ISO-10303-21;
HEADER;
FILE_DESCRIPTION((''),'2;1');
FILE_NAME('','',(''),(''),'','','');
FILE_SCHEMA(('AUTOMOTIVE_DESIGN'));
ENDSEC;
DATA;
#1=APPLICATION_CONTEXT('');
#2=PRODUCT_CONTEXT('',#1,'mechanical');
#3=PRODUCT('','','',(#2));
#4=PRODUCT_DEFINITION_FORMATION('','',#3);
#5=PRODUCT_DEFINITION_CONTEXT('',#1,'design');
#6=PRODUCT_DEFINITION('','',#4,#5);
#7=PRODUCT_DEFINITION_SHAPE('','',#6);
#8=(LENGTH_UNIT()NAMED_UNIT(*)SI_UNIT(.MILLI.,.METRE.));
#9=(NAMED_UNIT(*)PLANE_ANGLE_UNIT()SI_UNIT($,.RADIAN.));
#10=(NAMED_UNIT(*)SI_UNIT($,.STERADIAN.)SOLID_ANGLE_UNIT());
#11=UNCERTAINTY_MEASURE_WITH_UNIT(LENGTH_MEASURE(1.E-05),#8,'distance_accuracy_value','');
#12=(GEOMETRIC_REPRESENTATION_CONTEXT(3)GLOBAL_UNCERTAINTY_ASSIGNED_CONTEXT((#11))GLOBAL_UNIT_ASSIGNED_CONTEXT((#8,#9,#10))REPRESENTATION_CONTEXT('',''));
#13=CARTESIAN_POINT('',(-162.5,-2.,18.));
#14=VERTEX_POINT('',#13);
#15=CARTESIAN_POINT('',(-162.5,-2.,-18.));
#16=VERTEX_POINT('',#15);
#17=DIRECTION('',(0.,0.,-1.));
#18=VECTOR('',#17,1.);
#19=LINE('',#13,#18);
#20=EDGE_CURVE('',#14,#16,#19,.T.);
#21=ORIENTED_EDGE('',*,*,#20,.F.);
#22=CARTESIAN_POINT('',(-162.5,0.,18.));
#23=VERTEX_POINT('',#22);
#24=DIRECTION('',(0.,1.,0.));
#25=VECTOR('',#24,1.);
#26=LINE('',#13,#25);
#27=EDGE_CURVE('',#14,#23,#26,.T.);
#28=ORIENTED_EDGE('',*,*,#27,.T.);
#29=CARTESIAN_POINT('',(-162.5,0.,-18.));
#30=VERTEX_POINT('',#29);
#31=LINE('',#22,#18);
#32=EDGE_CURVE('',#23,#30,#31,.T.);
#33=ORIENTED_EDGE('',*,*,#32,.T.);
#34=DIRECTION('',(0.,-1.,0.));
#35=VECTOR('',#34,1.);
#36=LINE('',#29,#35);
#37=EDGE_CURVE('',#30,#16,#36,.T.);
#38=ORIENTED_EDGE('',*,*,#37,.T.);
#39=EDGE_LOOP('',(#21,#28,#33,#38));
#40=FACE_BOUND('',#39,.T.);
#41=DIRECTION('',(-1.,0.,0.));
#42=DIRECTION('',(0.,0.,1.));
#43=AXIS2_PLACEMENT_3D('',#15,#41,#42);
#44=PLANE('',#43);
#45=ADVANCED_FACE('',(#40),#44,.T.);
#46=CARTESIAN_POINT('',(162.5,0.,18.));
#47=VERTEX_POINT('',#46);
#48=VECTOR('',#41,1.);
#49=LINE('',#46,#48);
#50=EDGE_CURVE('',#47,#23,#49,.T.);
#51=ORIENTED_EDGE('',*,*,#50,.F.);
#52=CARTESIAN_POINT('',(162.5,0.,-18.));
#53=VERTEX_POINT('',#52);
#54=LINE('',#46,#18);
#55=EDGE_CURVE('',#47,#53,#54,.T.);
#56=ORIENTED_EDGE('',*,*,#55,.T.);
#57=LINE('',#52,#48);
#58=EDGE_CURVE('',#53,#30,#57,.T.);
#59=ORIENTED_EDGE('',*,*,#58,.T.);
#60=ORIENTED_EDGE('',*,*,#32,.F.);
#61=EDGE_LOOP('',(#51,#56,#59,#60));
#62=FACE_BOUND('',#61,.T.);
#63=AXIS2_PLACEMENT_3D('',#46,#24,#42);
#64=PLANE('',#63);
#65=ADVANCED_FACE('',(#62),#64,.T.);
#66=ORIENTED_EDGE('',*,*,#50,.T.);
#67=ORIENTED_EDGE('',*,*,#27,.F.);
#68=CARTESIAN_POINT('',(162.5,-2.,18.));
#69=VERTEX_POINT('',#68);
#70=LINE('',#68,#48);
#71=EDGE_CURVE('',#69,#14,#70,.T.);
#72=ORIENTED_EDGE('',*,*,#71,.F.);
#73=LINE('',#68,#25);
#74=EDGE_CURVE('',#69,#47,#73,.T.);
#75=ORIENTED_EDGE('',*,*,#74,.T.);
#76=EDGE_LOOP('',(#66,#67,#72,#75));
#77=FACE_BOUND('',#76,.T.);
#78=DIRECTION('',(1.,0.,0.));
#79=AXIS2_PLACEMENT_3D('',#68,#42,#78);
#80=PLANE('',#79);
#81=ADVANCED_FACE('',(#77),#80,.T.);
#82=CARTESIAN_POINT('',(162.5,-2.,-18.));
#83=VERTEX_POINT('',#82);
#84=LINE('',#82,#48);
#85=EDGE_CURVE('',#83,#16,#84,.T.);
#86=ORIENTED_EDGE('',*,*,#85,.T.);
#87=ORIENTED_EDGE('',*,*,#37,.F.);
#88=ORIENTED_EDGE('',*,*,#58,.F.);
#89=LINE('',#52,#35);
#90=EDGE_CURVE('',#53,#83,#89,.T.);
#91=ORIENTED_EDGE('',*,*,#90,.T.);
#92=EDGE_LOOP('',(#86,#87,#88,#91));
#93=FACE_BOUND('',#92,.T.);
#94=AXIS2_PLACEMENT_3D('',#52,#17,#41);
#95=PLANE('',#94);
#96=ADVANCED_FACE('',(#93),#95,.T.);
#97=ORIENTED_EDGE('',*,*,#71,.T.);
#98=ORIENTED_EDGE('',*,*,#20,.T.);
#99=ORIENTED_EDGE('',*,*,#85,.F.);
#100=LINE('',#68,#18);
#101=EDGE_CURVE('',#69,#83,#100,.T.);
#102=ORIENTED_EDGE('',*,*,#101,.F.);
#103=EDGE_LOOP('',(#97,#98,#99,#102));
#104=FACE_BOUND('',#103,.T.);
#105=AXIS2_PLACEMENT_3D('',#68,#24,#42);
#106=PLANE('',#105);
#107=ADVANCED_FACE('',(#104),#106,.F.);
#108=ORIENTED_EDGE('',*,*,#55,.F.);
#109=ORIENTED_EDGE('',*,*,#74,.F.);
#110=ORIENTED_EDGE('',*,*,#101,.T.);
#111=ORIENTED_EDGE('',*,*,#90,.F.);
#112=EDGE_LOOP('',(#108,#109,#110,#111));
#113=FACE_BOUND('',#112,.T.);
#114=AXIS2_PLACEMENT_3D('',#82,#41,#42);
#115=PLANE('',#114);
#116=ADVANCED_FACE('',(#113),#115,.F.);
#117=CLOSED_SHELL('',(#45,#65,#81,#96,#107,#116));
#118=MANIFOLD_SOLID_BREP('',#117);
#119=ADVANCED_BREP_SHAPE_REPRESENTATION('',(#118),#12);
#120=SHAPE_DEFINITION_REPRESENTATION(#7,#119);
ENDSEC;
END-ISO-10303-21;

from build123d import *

# Parameters (mm, degrees)
ESBO_O1_W          = 36
ESBO_O1_H          = 2
FLANGE_BASE2_DEPTH = 162.5


# Sheet-metal steps are written as plain solids
with BuildPart() as part:
    # Esboço1 → Flange-base2 (new, symmetric)
    with BuildSketch(Plane(origin=(0, 0, 0), x_dir=(0, 0, -1), z_dir=(1, 0, 0))):
        with Locations((0, -1)):
            Rectangle(ESBO_O1_W, ESBO_O1_H)
    extrude(amount=FLANGE_BASE2_DEPTH, both=True)


solid = part.part
